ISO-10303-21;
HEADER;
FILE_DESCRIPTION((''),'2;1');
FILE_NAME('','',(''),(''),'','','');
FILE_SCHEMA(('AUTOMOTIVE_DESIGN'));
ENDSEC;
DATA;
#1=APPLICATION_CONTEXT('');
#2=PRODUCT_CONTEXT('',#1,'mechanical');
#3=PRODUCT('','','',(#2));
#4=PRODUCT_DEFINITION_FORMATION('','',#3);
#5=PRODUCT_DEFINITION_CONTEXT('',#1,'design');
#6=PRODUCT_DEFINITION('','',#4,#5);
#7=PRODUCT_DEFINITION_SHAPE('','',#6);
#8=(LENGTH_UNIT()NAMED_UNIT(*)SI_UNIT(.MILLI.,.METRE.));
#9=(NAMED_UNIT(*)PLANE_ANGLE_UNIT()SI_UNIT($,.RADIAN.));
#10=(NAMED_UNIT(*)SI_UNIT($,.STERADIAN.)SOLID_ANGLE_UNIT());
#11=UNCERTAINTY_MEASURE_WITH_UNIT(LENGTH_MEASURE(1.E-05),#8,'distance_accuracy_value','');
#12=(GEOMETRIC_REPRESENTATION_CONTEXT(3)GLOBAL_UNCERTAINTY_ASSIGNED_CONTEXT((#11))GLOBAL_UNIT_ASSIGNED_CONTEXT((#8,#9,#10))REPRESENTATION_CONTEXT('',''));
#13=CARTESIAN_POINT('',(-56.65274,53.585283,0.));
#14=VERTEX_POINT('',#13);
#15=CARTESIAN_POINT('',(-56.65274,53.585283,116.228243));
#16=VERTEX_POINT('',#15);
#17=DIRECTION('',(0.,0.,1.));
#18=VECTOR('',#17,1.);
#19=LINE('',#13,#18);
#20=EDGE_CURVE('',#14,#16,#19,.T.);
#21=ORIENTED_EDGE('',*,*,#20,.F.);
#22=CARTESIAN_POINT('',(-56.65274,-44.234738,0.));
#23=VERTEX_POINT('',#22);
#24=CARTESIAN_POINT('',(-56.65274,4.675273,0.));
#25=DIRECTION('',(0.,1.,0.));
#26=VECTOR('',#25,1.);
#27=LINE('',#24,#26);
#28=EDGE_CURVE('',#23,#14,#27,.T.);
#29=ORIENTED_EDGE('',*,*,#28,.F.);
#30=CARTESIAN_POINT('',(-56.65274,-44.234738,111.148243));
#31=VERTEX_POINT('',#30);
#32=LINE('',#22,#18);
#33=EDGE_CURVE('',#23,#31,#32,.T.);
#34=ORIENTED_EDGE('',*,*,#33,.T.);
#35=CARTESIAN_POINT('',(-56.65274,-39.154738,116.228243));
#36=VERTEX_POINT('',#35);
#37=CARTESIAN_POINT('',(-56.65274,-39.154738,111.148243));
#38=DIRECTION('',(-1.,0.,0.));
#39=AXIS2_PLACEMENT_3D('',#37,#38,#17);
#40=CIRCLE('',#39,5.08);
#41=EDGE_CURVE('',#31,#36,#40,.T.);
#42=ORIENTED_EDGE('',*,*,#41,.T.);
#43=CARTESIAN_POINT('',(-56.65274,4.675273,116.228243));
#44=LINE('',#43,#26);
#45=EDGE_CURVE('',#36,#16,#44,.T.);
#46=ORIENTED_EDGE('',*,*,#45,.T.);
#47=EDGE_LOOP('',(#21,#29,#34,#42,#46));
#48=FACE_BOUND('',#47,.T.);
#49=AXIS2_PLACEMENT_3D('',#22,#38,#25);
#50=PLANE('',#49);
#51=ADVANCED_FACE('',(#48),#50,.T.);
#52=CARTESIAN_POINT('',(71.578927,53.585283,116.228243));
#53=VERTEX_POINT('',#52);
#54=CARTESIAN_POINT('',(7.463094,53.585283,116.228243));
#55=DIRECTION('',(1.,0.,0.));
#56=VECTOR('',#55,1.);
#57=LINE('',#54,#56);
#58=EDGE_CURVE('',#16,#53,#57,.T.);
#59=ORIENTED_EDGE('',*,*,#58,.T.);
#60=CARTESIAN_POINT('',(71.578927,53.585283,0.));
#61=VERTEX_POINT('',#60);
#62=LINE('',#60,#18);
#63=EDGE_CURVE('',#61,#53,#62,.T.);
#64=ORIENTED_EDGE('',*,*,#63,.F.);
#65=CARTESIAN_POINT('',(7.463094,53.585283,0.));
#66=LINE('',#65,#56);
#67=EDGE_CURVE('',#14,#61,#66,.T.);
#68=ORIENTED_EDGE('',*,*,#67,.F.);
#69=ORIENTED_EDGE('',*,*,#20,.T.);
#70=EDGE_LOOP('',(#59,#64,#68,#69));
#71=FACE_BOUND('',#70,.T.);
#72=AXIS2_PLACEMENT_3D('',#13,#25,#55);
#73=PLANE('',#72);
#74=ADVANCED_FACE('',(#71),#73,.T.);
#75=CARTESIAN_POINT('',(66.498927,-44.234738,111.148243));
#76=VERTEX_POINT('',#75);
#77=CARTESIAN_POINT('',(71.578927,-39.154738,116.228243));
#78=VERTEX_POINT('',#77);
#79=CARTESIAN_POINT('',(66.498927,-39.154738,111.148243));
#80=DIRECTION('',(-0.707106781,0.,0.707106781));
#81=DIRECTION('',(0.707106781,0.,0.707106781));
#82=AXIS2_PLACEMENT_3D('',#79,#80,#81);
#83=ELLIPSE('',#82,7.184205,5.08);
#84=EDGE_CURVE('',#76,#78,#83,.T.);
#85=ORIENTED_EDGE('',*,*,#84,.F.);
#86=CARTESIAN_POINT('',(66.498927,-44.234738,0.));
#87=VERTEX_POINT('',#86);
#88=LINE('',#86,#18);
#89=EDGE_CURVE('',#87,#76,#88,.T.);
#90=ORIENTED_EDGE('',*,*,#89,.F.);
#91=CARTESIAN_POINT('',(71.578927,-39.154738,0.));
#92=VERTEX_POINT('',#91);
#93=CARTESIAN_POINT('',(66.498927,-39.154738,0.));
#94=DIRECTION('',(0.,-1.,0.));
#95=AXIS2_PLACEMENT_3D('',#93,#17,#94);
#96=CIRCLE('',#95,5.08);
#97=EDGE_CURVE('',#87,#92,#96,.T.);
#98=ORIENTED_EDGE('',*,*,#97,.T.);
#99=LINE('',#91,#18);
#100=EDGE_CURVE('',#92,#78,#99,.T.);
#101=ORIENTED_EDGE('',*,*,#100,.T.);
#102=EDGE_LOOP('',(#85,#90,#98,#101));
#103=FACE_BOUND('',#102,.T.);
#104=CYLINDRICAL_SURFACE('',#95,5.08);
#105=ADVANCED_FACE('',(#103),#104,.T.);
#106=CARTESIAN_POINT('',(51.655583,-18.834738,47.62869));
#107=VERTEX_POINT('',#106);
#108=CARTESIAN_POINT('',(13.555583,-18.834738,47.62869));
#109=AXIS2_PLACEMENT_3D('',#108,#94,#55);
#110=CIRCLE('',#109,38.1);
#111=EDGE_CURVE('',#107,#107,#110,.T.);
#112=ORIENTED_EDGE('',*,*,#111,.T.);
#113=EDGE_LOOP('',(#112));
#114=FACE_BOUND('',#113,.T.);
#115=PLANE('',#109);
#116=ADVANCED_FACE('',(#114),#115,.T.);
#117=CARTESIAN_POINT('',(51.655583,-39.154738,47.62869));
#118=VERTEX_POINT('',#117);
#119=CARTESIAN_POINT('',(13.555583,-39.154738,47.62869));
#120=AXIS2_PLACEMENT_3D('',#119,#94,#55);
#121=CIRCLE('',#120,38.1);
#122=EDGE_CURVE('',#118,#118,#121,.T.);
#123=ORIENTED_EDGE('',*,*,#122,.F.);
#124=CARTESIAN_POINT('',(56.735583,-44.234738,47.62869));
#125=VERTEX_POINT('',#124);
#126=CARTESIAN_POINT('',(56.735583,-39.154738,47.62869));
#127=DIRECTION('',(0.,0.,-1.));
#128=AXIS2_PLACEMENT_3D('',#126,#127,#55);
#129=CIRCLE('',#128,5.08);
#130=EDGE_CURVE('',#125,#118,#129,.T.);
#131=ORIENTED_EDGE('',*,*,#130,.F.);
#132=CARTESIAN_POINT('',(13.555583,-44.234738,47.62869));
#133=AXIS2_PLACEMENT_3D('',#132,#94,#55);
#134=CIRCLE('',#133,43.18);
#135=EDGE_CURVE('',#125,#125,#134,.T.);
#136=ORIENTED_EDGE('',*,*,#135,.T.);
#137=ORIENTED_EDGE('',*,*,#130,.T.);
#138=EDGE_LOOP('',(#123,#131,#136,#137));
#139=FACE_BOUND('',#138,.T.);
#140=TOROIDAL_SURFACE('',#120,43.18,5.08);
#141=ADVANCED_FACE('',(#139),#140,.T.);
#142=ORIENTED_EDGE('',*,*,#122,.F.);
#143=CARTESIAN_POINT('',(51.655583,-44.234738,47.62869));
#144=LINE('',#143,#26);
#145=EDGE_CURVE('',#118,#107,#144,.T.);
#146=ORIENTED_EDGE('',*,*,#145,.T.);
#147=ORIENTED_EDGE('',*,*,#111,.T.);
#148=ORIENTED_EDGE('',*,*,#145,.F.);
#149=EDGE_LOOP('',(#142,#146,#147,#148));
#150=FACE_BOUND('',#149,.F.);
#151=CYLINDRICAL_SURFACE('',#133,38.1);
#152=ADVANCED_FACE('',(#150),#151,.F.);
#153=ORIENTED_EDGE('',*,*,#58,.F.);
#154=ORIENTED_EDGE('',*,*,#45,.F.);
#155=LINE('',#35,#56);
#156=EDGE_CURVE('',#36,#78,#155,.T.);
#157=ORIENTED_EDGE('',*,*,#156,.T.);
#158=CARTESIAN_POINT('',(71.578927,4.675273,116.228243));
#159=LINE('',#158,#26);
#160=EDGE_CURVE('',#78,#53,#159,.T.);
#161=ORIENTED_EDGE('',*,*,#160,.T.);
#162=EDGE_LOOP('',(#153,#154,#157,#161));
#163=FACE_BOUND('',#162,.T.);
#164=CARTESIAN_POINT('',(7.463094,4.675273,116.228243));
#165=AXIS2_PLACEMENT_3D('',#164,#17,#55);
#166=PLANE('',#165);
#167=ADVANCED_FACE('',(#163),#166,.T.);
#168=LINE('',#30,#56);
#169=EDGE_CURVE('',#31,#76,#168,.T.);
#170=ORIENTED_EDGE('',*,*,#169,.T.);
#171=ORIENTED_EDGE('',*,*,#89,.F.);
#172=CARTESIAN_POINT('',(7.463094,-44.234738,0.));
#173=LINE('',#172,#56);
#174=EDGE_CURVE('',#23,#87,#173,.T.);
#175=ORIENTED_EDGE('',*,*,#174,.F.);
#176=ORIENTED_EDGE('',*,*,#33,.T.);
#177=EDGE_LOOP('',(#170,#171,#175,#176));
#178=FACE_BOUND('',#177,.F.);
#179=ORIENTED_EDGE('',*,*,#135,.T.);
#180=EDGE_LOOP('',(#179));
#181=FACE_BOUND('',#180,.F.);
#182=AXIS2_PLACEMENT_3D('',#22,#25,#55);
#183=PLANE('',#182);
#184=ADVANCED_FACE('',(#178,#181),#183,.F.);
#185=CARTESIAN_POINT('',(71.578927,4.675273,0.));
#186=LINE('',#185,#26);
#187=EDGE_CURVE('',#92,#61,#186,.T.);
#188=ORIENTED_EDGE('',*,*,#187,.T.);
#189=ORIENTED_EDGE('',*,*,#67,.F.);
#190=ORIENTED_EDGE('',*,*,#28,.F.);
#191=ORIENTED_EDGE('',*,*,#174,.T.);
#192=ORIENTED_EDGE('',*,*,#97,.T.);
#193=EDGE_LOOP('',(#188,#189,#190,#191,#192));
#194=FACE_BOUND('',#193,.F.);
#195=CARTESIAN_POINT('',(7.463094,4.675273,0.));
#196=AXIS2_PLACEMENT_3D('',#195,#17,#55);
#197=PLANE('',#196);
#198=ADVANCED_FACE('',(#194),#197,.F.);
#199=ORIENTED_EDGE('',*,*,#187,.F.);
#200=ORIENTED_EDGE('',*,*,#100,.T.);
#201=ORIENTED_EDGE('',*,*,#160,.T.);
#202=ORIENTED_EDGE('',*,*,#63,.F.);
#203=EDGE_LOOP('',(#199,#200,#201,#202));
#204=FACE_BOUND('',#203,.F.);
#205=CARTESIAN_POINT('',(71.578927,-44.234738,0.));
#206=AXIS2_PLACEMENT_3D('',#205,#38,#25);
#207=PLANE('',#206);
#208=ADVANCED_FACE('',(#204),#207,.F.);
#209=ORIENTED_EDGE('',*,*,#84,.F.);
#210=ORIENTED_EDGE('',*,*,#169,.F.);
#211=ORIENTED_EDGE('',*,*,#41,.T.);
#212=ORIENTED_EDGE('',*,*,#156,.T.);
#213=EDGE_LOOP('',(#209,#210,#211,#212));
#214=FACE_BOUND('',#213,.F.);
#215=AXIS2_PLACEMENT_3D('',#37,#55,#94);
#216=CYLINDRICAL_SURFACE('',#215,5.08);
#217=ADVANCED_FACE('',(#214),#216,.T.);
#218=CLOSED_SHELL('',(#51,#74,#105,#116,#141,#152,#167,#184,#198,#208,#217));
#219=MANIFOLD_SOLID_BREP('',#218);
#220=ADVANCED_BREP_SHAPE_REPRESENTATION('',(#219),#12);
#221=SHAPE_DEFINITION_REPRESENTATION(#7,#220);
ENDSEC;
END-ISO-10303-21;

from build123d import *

# Parameters (mm, degrees)
F0_W     = 128.2316669822
F0_H     = 97.8200212121
F1_DEPTH = 116.2282433361
F2_R     = 38.1
F3_DEPTH = 25.4
F4_R     = 5.08


with BuildPart() as f1:
    # F0 (on Top) → F1 (new body)
    with BuildSketch(Plane.XY):
        with Locations((7.463093847, 4.6752728522)):
            Rectangle(F0_W, F0_H)
    extrude(amount=F1_DEPTH)

    # F2 (on face) → F3 (cut)
    with BuildSketch(Plane.XZ.offset(44.2347377539)):
        with Locations((13.5555826128, 47.6286895573)):
            Circle(F2_R)
    extrude(amount=-F3_DEPTH, mode=Mode.SUBTRACT)

    # F4
    f4_edges = [f1.edges().sort_by_distance(p)[0] for p in [
        (71.578927, -44.234738, 58.114122),
        (7.463094, -44.234738, 116.228243),
        (-24.544417, -44.234738, 47.62869),
    ]]
    fillet(f4_edges, radius=F4_R)


solid = f1.part
